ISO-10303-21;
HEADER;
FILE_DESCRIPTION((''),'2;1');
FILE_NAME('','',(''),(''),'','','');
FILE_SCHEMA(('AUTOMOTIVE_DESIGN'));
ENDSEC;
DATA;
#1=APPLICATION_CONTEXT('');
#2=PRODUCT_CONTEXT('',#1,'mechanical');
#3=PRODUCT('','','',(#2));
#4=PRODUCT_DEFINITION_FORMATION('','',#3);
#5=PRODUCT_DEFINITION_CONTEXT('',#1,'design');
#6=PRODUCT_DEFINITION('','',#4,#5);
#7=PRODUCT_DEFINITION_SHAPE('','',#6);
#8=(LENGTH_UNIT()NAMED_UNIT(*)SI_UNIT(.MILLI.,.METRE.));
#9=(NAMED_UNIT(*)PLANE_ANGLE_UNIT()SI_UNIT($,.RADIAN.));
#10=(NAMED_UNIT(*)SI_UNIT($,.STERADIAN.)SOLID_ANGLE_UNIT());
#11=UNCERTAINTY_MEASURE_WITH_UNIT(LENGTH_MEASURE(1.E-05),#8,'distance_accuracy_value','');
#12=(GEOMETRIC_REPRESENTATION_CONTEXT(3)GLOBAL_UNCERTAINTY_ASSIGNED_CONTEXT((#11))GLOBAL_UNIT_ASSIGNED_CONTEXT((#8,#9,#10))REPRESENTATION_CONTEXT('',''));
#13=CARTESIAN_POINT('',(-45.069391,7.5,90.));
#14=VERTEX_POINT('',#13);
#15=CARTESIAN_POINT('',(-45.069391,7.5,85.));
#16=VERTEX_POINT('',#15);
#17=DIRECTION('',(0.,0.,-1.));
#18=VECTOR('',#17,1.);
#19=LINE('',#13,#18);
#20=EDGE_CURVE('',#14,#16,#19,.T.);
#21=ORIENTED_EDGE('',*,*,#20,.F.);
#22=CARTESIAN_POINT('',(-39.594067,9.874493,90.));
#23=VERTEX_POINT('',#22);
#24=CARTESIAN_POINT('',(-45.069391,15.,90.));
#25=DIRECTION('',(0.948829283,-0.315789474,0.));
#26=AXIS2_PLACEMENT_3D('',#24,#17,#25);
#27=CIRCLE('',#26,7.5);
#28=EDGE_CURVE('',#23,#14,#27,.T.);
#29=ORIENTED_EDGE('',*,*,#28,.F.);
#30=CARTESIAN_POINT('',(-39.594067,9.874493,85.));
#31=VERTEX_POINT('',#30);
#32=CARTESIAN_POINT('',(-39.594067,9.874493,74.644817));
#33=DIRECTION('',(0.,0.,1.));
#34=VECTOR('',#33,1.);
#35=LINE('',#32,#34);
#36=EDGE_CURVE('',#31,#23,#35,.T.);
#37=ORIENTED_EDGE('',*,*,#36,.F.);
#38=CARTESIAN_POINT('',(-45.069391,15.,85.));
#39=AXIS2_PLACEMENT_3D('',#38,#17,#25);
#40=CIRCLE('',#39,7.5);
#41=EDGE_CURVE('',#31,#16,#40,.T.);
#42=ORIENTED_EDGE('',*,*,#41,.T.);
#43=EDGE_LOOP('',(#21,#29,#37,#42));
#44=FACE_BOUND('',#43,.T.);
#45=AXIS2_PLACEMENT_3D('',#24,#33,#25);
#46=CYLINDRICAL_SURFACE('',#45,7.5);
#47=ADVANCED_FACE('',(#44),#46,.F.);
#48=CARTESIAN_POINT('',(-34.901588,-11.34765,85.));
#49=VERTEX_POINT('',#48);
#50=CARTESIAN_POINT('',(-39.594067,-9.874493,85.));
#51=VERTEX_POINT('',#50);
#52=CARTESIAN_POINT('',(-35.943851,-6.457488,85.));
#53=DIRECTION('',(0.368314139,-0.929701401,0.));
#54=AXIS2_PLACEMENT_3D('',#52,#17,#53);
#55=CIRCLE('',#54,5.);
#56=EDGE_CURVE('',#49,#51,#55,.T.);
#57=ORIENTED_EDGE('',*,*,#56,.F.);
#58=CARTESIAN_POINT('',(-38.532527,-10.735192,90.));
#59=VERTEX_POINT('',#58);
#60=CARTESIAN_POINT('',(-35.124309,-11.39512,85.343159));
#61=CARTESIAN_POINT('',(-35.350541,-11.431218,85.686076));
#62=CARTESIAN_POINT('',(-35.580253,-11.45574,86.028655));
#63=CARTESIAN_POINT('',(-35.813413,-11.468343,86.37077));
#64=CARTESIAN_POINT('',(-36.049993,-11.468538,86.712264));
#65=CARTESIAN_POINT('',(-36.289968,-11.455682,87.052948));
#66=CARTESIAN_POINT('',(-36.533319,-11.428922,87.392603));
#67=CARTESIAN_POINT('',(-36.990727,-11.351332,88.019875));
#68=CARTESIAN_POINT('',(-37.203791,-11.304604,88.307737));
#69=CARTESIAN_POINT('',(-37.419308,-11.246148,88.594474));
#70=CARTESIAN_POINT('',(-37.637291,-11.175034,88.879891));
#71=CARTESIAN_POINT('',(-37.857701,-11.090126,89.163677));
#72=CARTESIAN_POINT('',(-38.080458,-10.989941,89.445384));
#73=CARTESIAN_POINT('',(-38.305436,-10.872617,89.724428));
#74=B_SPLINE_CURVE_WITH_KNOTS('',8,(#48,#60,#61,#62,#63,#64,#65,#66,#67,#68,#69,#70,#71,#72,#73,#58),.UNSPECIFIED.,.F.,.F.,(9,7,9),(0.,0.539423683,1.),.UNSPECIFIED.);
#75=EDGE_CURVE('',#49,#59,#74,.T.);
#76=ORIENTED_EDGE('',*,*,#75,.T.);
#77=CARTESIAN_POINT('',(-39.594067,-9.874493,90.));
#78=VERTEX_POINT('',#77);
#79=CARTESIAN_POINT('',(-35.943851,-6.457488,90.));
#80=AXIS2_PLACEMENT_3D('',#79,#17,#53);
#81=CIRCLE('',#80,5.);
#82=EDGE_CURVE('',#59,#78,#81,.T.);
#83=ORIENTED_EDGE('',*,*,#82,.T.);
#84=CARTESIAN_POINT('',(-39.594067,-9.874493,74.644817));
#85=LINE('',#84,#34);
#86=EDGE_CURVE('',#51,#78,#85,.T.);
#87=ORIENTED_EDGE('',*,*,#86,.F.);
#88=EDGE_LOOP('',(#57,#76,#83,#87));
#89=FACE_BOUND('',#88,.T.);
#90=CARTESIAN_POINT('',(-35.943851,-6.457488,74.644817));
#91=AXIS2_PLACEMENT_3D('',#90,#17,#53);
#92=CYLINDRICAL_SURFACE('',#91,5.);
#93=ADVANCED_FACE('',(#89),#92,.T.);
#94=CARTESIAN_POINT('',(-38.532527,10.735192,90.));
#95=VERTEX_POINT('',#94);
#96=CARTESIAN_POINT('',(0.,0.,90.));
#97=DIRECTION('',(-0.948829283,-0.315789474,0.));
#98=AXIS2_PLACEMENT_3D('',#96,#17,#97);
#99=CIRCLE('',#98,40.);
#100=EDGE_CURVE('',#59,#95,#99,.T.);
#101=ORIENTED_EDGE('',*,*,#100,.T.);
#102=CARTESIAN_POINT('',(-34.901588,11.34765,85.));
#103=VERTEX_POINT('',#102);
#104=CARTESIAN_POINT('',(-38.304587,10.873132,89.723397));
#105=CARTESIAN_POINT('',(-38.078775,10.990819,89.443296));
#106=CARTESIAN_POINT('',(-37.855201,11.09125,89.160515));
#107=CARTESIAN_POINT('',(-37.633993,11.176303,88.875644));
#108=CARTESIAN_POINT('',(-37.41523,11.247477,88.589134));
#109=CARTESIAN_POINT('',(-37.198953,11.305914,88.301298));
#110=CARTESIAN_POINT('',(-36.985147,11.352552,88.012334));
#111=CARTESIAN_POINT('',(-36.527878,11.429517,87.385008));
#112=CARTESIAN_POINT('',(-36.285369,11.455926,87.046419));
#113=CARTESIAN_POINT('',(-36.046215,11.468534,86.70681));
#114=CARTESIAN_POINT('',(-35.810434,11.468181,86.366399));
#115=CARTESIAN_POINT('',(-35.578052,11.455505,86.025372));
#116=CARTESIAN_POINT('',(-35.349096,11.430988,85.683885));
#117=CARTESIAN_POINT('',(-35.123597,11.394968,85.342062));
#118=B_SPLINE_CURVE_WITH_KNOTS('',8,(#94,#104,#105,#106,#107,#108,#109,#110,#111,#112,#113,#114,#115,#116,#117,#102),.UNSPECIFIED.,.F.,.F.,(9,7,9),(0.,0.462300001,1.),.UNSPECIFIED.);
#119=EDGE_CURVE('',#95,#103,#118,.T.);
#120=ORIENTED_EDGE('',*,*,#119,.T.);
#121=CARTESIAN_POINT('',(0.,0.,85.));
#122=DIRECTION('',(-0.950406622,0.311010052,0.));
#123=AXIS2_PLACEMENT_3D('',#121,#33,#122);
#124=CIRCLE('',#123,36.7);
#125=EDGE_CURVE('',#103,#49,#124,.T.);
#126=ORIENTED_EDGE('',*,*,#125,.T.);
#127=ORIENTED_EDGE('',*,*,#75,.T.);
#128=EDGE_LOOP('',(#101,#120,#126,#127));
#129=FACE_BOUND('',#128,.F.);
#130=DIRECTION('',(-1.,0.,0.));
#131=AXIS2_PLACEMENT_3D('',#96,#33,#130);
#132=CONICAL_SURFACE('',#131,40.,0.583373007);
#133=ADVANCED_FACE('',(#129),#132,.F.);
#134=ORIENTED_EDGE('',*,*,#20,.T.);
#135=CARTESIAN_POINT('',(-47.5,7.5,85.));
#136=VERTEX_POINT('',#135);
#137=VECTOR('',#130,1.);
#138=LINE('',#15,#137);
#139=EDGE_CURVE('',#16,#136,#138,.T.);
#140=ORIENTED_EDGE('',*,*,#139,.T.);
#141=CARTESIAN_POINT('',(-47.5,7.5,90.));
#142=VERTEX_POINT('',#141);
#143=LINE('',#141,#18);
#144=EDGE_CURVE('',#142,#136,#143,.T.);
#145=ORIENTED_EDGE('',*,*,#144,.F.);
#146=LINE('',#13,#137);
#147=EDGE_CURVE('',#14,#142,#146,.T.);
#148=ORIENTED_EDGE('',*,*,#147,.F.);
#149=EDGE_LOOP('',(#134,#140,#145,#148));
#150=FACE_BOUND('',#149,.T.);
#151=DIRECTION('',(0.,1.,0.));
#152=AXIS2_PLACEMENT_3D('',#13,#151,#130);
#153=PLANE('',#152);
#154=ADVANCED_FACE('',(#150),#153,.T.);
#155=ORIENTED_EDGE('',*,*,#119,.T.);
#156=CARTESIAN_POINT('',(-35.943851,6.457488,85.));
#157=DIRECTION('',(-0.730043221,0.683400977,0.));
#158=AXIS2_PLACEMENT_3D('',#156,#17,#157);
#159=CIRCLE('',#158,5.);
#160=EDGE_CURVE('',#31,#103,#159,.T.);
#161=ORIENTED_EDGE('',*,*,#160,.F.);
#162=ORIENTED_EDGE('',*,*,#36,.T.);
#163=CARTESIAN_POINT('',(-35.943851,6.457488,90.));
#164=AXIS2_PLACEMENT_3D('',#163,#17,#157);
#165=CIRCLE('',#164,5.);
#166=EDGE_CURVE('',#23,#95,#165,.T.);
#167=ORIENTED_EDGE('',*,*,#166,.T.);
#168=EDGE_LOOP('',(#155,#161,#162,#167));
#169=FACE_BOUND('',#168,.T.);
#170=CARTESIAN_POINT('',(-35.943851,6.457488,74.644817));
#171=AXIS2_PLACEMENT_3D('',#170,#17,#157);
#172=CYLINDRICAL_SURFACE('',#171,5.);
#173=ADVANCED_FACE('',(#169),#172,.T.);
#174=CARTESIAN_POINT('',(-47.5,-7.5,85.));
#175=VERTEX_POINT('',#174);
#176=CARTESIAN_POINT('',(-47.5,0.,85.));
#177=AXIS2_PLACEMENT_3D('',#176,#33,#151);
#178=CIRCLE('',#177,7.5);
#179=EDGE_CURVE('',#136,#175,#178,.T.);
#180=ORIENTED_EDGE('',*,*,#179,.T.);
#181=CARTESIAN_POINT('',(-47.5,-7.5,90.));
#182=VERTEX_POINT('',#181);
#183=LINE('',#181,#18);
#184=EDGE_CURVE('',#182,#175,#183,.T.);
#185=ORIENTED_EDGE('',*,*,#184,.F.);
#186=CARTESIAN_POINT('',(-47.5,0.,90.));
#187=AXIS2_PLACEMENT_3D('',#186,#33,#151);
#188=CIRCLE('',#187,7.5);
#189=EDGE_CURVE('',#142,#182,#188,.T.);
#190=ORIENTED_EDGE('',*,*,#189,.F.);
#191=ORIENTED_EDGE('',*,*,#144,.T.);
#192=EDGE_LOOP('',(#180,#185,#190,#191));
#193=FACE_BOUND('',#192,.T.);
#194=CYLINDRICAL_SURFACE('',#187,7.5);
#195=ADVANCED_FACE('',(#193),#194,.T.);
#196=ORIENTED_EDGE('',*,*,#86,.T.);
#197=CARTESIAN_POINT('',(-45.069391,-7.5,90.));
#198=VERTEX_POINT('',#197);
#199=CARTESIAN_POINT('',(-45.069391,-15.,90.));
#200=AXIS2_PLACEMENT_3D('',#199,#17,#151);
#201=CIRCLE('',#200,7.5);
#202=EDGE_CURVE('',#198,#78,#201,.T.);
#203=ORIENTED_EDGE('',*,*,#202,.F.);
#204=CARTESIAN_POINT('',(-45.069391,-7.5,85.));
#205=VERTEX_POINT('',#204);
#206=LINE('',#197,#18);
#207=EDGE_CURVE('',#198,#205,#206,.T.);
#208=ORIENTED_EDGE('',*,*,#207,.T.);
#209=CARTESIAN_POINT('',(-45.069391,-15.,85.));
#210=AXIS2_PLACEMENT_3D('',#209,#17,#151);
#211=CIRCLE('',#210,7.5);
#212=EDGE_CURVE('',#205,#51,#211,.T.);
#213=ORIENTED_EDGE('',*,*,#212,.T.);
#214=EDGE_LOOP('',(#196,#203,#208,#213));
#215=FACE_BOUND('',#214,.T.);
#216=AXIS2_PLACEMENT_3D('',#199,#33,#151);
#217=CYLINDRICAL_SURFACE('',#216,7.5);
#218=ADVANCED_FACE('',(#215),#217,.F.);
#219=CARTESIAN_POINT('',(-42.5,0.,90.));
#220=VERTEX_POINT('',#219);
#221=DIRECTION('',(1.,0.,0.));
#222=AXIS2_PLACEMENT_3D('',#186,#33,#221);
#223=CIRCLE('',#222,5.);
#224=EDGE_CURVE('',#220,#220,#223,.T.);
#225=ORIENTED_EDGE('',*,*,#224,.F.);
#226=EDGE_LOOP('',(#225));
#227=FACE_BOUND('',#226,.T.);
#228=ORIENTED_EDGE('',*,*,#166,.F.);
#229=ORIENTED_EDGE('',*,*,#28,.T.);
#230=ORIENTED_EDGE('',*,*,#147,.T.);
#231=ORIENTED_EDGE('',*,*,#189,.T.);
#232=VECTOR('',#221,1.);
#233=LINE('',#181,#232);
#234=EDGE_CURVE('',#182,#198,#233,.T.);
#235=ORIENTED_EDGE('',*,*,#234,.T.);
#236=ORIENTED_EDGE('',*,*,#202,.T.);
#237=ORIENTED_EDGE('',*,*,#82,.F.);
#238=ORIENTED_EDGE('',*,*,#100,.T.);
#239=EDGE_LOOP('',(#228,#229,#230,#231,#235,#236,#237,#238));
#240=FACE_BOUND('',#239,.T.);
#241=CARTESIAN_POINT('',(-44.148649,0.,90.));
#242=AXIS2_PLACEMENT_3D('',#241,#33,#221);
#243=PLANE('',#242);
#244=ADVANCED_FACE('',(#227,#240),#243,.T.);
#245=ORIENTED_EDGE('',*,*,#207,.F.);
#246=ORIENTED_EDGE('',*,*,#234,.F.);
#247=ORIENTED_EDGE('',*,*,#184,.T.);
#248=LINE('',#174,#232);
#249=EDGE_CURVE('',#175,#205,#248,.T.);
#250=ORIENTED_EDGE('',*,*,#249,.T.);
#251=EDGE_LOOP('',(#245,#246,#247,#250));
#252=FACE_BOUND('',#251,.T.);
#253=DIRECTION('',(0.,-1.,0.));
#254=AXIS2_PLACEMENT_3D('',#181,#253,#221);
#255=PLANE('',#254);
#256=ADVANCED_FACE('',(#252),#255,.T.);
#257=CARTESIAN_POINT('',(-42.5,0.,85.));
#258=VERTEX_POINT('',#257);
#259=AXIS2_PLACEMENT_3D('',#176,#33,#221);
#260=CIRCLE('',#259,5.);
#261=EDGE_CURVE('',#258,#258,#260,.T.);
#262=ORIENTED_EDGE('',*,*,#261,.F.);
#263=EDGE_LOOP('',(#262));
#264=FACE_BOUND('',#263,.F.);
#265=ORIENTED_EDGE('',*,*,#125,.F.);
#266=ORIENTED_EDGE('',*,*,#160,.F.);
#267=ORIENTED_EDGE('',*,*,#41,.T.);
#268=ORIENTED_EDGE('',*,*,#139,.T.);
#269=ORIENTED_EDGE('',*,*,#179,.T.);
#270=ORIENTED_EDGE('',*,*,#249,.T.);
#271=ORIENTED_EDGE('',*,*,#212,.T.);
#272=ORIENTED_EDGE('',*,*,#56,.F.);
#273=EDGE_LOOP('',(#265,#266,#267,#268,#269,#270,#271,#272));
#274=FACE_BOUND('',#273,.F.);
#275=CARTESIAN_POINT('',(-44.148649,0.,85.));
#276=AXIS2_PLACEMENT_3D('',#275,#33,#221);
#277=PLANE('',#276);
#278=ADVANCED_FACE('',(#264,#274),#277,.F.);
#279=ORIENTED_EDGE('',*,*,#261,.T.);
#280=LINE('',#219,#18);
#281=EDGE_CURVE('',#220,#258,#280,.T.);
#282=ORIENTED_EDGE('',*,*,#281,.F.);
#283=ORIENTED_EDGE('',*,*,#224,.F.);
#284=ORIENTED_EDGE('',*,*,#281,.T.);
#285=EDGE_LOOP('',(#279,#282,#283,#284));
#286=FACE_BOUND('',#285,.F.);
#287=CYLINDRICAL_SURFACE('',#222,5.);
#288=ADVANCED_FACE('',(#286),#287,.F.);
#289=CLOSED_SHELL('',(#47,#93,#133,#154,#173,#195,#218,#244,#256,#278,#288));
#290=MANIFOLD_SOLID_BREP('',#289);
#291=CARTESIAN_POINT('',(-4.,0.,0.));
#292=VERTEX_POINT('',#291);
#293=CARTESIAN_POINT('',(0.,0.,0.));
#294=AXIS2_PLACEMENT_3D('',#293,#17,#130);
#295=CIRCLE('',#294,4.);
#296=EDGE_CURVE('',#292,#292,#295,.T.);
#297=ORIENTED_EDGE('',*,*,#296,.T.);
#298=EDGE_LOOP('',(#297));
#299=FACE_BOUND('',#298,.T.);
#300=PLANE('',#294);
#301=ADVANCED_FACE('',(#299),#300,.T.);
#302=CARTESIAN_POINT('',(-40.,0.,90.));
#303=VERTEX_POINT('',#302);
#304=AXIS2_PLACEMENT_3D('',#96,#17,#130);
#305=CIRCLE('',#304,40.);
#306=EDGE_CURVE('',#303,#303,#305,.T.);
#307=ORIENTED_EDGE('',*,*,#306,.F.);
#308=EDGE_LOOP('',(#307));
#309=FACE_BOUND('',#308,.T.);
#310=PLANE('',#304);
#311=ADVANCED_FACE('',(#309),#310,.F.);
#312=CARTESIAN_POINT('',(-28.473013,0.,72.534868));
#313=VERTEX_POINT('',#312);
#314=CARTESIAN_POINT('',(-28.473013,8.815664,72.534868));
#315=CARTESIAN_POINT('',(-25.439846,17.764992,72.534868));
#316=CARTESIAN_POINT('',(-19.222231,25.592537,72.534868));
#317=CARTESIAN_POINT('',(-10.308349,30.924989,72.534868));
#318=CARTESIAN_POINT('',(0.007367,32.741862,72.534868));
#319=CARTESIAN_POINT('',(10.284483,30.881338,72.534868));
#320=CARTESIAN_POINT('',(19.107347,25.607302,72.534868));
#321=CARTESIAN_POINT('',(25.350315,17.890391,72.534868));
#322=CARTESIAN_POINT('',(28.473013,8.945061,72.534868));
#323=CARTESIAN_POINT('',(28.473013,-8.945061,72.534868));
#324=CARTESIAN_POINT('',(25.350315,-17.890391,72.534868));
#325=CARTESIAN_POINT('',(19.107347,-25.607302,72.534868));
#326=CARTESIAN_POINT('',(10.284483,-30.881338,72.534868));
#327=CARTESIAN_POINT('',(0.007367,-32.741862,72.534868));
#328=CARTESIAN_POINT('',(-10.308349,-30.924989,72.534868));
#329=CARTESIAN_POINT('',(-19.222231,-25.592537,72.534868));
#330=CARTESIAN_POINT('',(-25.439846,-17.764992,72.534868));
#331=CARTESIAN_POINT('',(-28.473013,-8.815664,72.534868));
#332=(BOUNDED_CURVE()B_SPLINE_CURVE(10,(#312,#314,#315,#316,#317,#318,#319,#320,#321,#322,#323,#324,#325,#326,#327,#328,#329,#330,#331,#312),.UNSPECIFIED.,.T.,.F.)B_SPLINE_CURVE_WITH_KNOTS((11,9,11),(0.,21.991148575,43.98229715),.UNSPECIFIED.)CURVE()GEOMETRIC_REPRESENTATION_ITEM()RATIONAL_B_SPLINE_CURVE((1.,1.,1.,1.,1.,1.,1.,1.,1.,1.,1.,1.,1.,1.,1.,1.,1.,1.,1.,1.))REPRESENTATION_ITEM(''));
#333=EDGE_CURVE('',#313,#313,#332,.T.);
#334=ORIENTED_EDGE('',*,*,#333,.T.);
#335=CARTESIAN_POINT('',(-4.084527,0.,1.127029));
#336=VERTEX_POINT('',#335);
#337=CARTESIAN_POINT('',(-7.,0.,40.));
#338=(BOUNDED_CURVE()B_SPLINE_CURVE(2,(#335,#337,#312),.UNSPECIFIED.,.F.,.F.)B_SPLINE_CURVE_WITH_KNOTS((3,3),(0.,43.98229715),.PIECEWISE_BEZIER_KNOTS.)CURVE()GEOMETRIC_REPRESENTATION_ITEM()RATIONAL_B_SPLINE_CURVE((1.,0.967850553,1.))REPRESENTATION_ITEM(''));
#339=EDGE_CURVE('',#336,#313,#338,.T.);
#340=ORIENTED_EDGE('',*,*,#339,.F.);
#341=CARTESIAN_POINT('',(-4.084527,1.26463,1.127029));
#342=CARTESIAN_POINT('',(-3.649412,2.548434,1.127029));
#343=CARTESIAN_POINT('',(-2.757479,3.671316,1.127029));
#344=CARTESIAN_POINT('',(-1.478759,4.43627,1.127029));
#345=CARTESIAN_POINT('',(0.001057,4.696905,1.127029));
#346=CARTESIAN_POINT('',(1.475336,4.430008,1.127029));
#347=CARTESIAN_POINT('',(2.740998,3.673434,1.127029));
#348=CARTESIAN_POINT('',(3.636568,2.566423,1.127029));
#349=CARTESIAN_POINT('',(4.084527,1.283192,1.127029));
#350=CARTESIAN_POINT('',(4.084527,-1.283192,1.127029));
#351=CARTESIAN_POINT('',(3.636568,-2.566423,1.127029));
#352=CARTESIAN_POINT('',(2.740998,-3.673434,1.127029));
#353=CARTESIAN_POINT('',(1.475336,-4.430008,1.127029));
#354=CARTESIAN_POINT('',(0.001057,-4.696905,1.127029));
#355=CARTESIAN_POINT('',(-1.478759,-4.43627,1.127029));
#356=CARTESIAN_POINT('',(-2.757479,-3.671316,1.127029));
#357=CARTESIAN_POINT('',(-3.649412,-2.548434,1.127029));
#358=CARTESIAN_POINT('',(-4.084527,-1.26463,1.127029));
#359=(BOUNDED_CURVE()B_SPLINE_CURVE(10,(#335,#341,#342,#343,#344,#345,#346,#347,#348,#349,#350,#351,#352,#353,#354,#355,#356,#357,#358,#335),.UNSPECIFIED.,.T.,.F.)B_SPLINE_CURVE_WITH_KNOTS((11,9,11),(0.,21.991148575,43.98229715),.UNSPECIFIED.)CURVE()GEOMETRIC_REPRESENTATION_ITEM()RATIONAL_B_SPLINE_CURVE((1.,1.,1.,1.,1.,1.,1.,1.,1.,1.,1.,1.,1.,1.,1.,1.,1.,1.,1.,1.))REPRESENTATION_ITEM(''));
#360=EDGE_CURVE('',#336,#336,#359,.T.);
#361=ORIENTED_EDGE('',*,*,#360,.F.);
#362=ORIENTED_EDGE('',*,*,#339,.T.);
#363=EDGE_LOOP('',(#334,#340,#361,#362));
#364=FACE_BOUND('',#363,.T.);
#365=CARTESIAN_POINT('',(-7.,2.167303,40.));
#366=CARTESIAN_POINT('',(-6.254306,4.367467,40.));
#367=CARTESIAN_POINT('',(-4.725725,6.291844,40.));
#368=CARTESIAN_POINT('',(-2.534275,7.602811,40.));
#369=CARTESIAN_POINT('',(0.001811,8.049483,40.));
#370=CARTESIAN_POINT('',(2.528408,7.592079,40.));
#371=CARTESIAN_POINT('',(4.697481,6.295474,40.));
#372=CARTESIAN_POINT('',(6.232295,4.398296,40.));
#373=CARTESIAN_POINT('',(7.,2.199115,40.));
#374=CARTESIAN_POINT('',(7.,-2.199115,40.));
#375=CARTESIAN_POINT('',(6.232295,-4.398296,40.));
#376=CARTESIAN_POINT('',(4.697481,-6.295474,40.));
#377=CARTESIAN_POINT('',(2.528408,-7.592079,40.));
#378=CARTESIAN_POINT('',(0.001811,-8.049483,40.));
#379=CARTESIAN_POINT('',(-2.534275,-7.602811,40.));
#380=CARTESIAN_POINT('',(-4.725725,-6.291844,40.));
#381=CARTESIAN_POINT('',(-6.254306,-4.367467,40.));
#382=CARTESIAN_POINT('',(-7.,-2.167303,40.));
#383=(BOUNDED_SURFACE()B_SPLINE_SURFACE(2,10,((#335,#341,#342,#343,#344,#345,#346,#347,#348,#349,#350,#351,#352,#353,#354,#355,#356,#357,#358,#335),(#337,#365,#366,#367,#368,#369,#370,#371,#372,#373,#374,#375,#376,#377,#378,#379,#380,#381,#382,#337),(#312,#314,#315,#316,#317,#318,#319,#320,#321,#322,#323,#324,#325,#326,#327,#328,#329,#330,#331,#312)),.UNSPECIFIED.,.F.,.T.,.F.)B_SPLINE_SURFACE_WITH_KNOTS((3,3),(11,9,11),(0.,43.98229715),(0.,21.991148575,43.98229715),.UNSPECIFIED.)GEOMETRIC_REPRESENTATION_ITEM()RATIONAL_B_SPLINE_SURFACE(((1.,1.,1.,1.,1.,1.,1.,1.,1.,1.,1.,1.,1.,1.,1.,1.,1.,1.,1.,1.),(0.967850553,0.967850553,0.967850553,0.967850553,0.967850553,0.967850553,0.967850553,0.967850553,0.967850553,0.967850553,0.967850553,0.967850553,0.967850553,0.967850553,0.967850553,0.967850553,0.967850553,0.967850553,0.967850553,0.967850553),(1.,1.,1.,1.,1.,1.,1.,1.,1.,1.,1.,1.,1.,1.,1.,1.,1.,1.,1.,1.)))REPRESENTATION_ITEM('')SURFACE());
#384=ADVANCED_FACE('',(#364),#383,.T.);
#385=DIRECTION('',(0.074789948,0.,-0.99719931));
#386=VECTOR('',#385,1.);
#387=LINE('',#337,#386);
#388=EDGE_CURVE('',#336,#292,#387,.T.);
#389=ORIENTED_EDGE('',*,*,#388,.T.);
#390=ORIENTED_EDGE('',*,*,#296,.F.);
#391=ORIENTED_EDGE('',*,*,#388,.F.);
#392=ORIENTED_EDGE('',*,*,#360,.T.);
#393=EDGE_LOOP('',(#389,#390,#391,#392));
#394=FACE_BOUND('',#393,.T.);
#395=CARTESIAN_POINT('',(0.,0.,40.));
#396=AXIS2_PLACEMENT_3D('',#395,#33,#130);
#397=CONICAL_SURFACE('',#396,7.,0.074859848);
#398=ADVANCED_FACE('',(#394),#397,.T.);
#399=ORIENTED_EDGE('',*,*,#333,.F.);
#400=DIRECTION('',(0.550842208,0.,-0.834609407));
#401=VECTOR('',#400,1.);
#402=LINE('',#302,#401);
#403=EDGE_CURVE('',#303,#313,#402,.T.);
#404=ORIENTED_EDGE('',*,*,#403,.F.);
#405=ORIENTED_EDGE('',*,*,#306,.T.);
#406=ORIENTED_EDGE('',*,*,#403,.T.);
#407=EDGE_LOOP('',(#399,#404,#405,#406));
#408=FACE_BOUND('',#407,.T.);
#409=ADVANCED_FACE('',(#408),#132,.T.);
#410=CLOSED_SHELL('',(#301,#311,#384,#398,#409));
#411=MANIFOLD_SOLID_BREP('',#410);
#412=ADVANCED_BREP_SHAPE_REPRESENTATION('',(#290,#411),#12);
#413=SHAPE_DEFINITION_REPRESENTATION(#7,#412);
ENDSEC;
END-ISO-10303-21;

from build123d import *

# Parameters (mm, degrees)
F2_R        = 150
F3_R        = 5
F4_DEPTH    = 5
F6_T1_DEPTH = 25.7103664143


# Not quite as in the source:
# - a fillet or chamfer that OpenCascade refuses, or shapes differently, is made with other operations: its cross-section is extruded or revolved along the edge and cut away or added


with BuildPart() as f1:
    # F0 (on Front) → F1 (revolve)
    with BuildSketch(Plane.XZ):
        Polygon((-7, 40), (-4, 0), (0, 0), (0, 90), (-40, 90), align=None)
    revolve(axis=Axis((0, 0, 45), (0, 0, -1)))

    # F2
    f2_edges = [f1.edges().sort_by_distance(p)[0] for p in [
        (7, 0, 40),
    ]]
    fillet(f2_edges, radius=F2_R)


with BuildPart() as f4:
    # F3 (on face) → F4 (new body)
    with BuildSketch(Plane.XY.offset(90)):
        with BuildLine():
            Line((-45.0693909433, 7.5), (-47.5, 7.5))
            ThreePointArc((-47.5, 7.5), (-52.8033008589, 5.3033008589), (-55, 0))
            ThreePointArc((-55, 0), (-52.8033008589, -5.3033008589), (-47.5, -7.5))
            Line((-47.5, -7.5), (-45.0693909433, -7.5))
            ThreePointArc((-45.0693909433, -7.5), (-40.6826585543, -8.9166967076), (-37.9531713207, -12.6315789474))
            ThreePointArc((-37.9531713207, -12.6315789474), (-38.707011174, -10.0879772984), (-39.2905841138, -7.5))
            ThreePointArc((-39.2905841138, -7.5), (-40, 0), (-39.2905841138, 7.5))
            ThreePointArc((-39.2905841138, 7.5), (-38.707011174, 10.0879772984), (-37.9531713207, 12.6315789474))
            ThreePointArc((-37.9531713207, 12.6315789474), (-40.6826585543, 8.9166967076), (-45.0693909433, 7.5))
        make_face()
        with Locations((-47.5, 0)):
            Circle(F3_R, mode=Mode.SUBTRACT)
        with BuildLine():
            Line((-25, 7.5), (-37.9531713207, 12.6315789474))
            ThreePointArc((-37.9531713207, 12.6315789474), (-38.707011174, 10.0879772984), (-39.2905841138, 7.5))
            ThreePointArc((-39.2905841138, 7.5), (-40, 0), (-39.2905841138, -7.5))
            ThreePointArc((-39.2905841138, -7.5), (-38.707011174, -10.0879772984), (-37.9531713207, -12.6315789474))
            Line((-37.9531713207, -12.6315789474), (-25, -7.5))
            Line((-25, -7.5), (-25, 7.5))
        make_face()
    extrude(amount=-F4_DEPTH)

    # F0 (on Front) → F5 (revolve, cut)
    with BuildSketch(Plane.XZ):
        Polygon((-7, 40), (-4, 0), (0, 0), (0, 90), (-40, 90), align=None)
    revolve(axis=Axis((0, 0, 45), (0, 0, -1)), mode=Mode.SUBTRACT)

    # F6: fillet of radius 5 on 2 edges, made by hand

    # F6_s2 → F6_t1 (cut)
    with BuildSketch(Plane.XY.offset(74.6448167928)):
        with BuildLine():
            ThreePointArc((-34.102279986, -11.1059947941), (-37.0379022892, -11.33632485), (-39.5940667848, -9.874492673))
            ThreePointArc((-39.5940667848, -9.874492673), (-38.6244607746, -11.1642634187), (-37.9531713207, -12.6315789474))
            Line((-37.9531713207, -12.6315789474), (-34.102279986, -11.1059947941))
        make_face()
        with BuildLine():
            ThreePointArc((-39.5940667848, 9.874492673), (-37.0379022892, 11.33632485), (-34.102279986, 11.1059947941))
            Line((-34.102279986, 11.1059947941), (-37.9531713207, 12.6315789474))
            ThreePointArc((-37.9531713207, 12.6315789474), (-38.6244607746, 11.1642634187), (-39.5940667848, 9.874492673))
        make_face()
    extrude(amount=F6_T1_DEPTH, mode=Mode.SUBTRACT)


solid = Compound([f1.part, f4.part])
